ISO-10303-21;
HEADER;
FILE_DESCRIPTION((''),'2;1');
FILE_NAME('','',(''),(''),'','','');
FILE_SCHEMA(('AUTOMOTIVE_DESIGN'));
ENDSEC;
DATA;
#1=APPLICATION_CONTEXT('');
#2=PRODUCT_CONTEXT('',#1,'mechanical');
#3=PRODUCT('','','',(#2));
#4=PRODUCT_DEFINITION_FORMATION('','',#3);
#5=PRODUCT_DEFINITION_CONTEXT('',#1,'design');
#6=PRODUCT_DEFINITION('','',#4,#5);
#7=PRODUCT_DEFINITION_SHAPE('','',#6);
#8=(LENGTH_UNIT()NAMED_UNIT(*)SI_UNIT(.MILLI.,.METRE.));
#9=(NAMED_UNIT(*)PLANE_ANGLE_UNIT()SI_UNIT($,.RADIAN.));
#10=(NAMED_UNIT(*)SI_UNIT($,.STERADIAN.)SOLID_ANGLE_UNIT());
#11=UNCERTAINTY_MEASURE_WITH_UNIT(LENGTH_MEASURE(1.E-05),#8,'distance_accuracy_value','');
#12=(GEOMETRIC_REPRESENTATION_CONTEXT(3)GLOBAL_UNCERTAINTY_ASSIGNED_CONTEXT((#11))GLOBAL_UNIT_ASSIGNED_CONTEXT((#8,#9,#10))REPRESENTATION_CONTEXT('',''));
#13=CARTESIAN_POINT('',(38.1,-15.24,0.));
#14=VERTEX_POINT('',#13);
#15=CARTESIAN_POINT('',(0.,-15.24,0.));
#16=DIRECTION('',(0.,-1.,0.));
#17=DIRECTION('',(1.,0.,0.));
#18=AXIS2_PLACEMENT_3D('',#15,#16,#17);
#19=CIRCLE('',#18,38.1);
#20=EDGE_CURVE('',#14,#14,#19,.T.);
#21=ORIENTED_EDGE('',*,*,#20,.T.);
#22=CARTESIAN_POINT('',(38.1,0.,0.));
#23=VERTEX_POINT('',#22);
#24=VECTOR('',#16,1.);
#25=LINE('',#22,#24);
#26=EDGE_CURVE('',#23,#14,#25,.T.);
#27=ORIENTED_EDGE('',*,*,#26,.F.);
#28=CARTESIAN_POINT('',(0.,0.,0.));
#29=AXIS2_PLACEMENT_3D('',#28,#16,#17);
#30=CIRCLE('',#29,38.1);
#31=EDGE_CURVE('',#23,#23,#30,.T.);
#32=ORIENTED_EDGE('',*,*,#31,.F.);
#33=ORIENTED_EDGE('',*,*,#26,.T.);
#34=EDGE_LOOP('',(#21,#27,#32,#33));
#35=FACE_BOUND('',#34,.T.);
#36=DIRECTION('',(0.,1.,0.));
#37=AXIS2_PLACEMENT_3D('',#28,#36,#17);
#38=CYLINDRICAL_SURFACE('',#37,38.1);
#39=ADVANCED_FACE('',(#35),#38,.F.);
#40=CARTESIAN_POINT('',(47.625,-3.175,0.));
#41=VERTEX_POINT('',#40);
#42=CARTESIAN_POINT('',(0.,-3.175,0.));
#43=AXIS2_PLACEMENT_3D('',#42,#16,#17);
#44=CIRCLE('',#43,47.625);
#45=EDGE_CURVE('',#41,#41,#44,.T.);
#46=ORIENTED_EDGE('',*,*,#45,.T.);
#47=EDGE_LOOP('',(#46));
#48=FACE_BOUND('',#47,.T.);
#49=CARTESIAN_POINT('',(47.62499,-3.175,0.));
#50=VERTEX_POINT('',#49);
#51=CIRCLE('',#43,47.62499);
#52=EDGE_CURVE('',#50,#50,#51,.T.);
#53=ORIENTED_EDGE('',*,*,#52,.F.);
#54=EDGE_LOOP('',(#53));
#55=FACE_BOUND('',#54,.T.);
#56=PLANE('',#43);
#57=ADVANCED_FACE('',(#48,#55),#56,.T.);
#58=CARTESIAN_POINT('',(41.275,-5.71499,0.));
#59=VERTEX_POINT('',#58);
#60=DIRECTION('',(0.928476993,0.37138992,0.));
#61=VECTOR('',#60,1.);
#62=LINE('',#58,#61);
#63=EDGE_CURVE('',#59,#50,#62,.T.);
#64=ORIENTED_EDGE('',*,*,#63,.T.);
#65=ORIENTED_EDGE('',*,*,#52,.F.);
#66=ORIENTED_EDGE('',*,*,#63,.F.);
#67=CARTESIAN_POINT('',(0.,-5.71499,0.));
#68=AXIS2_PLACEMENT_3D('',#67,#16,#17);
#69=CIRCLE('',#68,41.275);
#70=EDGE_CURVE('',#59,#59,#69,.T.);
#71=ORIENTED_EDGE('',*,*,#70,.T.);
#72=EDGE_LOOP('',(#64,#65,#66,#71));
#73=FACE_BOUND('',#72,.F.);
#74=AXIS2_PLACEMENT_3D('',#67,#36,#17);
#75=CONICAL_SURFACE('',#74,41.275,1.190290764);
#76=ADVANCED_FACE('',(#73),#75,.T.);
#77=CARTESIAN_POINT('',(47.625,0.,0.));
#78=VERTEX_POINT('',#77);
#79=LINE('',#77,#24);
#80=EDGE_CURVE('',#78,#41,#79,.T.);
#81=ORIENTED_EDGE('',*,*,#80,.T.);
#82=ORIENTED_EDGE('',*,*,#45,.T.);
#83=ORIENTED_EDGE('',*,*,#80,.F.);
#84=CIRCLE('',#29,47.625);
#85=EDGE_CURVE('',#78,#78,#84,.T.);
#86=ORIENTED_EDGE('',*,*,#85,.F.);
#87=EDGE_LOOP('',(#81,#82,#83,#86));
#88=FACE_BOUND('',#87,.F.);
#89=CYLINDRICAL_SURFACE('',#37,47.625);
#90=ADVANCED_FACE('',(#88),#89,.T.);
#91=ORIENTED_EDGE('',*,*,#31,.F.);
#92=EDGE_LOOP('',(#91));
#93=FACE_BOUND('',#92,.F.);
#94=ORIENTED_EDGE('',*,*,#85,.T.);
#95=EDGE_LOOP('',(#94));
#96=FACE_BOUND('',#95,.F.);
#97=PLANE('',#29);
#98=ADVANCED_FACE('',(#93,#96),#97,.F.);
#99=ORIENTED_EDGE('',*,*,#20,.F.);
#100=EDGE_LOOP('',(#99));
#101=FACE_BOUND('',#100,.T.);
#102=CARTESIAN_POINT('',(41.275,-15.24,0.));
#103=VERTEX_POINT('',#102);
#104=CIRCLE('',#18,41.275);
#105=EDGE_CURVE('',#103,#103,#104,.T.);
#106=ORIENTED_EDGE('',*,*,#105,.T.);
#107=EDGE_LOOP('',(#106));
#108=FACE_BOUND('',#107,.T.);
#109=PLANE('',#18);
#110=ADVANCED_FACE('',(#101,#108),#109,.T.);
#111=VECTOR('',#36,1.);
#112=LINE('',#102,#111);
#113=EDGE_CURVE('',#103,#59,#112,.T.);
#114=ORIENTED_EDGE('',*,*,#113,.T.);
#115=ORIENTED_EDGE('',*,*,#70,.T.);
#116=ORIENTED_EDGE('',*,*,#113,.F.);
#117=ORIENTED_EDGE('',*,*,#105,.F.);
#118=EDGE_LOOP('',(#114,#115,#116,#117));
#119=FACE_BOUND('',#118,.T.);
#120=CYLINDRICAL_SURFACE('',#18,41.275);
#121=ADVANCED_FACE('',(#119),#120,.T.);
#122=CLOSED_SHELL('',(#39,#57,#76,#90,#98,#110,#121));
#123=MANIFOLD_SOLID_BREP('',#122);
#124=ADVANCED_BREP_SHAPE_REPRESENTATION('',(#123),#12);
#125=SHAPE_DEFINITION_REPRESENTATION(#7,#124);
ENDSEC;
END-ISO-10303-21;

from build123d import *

# Parameters (mm, degrees)
F0_R     = 47.625
F0_R_2   = 38.1
F1_DEPTH = 15.24
F2_R     = 47.625
F2_R_2   = 41.275
F3_DEPTH = 12.065
F4_SIZE2 = 6.34999
F4_SIZE  = 2.53999


# Not quite as in the source:
# - a fillet or chamfer is up to 0.001 mm smaller than in the source, because OpenCascade refuses the exact size


with BuildPart() as f1:
    # F0 (on Front) → F1 (new body)
    with BuildSketch(Plane.XZ):
        Circle(F0_R)
        Circle(F0_R_2, mode=Mode.SUBTRACT)
    extrude(amount=F1_DEPTH)

    # F2 (on face) → F3 (cut)
    with BuildSketch(Plane.XZ.offset(15.24)):
        Circle(F2_R)
        Circle(F2_R_2, mode=Mode.SUBTRACT)
    extrude(amount=-F3_DEPTH, mode=Mode.SUBTRACT)

    # F4 (size 2.54 and 6.35 in the source; OpenCascade refuses exactly that, so slightly less here)
    f4_edges = [f1.edges().sort_by_distance(p)[0] for p in [
        (-41.275, -3.175, 0),
    ]]
    f4_side = f1.faces().sort_by_distance((-41.275, -9.2075, 0))[0]
    chamfer(f4_edges, length=F4_SIZE, length2=F4_SIZE2, reference=f4_side)


solid = f1.part
